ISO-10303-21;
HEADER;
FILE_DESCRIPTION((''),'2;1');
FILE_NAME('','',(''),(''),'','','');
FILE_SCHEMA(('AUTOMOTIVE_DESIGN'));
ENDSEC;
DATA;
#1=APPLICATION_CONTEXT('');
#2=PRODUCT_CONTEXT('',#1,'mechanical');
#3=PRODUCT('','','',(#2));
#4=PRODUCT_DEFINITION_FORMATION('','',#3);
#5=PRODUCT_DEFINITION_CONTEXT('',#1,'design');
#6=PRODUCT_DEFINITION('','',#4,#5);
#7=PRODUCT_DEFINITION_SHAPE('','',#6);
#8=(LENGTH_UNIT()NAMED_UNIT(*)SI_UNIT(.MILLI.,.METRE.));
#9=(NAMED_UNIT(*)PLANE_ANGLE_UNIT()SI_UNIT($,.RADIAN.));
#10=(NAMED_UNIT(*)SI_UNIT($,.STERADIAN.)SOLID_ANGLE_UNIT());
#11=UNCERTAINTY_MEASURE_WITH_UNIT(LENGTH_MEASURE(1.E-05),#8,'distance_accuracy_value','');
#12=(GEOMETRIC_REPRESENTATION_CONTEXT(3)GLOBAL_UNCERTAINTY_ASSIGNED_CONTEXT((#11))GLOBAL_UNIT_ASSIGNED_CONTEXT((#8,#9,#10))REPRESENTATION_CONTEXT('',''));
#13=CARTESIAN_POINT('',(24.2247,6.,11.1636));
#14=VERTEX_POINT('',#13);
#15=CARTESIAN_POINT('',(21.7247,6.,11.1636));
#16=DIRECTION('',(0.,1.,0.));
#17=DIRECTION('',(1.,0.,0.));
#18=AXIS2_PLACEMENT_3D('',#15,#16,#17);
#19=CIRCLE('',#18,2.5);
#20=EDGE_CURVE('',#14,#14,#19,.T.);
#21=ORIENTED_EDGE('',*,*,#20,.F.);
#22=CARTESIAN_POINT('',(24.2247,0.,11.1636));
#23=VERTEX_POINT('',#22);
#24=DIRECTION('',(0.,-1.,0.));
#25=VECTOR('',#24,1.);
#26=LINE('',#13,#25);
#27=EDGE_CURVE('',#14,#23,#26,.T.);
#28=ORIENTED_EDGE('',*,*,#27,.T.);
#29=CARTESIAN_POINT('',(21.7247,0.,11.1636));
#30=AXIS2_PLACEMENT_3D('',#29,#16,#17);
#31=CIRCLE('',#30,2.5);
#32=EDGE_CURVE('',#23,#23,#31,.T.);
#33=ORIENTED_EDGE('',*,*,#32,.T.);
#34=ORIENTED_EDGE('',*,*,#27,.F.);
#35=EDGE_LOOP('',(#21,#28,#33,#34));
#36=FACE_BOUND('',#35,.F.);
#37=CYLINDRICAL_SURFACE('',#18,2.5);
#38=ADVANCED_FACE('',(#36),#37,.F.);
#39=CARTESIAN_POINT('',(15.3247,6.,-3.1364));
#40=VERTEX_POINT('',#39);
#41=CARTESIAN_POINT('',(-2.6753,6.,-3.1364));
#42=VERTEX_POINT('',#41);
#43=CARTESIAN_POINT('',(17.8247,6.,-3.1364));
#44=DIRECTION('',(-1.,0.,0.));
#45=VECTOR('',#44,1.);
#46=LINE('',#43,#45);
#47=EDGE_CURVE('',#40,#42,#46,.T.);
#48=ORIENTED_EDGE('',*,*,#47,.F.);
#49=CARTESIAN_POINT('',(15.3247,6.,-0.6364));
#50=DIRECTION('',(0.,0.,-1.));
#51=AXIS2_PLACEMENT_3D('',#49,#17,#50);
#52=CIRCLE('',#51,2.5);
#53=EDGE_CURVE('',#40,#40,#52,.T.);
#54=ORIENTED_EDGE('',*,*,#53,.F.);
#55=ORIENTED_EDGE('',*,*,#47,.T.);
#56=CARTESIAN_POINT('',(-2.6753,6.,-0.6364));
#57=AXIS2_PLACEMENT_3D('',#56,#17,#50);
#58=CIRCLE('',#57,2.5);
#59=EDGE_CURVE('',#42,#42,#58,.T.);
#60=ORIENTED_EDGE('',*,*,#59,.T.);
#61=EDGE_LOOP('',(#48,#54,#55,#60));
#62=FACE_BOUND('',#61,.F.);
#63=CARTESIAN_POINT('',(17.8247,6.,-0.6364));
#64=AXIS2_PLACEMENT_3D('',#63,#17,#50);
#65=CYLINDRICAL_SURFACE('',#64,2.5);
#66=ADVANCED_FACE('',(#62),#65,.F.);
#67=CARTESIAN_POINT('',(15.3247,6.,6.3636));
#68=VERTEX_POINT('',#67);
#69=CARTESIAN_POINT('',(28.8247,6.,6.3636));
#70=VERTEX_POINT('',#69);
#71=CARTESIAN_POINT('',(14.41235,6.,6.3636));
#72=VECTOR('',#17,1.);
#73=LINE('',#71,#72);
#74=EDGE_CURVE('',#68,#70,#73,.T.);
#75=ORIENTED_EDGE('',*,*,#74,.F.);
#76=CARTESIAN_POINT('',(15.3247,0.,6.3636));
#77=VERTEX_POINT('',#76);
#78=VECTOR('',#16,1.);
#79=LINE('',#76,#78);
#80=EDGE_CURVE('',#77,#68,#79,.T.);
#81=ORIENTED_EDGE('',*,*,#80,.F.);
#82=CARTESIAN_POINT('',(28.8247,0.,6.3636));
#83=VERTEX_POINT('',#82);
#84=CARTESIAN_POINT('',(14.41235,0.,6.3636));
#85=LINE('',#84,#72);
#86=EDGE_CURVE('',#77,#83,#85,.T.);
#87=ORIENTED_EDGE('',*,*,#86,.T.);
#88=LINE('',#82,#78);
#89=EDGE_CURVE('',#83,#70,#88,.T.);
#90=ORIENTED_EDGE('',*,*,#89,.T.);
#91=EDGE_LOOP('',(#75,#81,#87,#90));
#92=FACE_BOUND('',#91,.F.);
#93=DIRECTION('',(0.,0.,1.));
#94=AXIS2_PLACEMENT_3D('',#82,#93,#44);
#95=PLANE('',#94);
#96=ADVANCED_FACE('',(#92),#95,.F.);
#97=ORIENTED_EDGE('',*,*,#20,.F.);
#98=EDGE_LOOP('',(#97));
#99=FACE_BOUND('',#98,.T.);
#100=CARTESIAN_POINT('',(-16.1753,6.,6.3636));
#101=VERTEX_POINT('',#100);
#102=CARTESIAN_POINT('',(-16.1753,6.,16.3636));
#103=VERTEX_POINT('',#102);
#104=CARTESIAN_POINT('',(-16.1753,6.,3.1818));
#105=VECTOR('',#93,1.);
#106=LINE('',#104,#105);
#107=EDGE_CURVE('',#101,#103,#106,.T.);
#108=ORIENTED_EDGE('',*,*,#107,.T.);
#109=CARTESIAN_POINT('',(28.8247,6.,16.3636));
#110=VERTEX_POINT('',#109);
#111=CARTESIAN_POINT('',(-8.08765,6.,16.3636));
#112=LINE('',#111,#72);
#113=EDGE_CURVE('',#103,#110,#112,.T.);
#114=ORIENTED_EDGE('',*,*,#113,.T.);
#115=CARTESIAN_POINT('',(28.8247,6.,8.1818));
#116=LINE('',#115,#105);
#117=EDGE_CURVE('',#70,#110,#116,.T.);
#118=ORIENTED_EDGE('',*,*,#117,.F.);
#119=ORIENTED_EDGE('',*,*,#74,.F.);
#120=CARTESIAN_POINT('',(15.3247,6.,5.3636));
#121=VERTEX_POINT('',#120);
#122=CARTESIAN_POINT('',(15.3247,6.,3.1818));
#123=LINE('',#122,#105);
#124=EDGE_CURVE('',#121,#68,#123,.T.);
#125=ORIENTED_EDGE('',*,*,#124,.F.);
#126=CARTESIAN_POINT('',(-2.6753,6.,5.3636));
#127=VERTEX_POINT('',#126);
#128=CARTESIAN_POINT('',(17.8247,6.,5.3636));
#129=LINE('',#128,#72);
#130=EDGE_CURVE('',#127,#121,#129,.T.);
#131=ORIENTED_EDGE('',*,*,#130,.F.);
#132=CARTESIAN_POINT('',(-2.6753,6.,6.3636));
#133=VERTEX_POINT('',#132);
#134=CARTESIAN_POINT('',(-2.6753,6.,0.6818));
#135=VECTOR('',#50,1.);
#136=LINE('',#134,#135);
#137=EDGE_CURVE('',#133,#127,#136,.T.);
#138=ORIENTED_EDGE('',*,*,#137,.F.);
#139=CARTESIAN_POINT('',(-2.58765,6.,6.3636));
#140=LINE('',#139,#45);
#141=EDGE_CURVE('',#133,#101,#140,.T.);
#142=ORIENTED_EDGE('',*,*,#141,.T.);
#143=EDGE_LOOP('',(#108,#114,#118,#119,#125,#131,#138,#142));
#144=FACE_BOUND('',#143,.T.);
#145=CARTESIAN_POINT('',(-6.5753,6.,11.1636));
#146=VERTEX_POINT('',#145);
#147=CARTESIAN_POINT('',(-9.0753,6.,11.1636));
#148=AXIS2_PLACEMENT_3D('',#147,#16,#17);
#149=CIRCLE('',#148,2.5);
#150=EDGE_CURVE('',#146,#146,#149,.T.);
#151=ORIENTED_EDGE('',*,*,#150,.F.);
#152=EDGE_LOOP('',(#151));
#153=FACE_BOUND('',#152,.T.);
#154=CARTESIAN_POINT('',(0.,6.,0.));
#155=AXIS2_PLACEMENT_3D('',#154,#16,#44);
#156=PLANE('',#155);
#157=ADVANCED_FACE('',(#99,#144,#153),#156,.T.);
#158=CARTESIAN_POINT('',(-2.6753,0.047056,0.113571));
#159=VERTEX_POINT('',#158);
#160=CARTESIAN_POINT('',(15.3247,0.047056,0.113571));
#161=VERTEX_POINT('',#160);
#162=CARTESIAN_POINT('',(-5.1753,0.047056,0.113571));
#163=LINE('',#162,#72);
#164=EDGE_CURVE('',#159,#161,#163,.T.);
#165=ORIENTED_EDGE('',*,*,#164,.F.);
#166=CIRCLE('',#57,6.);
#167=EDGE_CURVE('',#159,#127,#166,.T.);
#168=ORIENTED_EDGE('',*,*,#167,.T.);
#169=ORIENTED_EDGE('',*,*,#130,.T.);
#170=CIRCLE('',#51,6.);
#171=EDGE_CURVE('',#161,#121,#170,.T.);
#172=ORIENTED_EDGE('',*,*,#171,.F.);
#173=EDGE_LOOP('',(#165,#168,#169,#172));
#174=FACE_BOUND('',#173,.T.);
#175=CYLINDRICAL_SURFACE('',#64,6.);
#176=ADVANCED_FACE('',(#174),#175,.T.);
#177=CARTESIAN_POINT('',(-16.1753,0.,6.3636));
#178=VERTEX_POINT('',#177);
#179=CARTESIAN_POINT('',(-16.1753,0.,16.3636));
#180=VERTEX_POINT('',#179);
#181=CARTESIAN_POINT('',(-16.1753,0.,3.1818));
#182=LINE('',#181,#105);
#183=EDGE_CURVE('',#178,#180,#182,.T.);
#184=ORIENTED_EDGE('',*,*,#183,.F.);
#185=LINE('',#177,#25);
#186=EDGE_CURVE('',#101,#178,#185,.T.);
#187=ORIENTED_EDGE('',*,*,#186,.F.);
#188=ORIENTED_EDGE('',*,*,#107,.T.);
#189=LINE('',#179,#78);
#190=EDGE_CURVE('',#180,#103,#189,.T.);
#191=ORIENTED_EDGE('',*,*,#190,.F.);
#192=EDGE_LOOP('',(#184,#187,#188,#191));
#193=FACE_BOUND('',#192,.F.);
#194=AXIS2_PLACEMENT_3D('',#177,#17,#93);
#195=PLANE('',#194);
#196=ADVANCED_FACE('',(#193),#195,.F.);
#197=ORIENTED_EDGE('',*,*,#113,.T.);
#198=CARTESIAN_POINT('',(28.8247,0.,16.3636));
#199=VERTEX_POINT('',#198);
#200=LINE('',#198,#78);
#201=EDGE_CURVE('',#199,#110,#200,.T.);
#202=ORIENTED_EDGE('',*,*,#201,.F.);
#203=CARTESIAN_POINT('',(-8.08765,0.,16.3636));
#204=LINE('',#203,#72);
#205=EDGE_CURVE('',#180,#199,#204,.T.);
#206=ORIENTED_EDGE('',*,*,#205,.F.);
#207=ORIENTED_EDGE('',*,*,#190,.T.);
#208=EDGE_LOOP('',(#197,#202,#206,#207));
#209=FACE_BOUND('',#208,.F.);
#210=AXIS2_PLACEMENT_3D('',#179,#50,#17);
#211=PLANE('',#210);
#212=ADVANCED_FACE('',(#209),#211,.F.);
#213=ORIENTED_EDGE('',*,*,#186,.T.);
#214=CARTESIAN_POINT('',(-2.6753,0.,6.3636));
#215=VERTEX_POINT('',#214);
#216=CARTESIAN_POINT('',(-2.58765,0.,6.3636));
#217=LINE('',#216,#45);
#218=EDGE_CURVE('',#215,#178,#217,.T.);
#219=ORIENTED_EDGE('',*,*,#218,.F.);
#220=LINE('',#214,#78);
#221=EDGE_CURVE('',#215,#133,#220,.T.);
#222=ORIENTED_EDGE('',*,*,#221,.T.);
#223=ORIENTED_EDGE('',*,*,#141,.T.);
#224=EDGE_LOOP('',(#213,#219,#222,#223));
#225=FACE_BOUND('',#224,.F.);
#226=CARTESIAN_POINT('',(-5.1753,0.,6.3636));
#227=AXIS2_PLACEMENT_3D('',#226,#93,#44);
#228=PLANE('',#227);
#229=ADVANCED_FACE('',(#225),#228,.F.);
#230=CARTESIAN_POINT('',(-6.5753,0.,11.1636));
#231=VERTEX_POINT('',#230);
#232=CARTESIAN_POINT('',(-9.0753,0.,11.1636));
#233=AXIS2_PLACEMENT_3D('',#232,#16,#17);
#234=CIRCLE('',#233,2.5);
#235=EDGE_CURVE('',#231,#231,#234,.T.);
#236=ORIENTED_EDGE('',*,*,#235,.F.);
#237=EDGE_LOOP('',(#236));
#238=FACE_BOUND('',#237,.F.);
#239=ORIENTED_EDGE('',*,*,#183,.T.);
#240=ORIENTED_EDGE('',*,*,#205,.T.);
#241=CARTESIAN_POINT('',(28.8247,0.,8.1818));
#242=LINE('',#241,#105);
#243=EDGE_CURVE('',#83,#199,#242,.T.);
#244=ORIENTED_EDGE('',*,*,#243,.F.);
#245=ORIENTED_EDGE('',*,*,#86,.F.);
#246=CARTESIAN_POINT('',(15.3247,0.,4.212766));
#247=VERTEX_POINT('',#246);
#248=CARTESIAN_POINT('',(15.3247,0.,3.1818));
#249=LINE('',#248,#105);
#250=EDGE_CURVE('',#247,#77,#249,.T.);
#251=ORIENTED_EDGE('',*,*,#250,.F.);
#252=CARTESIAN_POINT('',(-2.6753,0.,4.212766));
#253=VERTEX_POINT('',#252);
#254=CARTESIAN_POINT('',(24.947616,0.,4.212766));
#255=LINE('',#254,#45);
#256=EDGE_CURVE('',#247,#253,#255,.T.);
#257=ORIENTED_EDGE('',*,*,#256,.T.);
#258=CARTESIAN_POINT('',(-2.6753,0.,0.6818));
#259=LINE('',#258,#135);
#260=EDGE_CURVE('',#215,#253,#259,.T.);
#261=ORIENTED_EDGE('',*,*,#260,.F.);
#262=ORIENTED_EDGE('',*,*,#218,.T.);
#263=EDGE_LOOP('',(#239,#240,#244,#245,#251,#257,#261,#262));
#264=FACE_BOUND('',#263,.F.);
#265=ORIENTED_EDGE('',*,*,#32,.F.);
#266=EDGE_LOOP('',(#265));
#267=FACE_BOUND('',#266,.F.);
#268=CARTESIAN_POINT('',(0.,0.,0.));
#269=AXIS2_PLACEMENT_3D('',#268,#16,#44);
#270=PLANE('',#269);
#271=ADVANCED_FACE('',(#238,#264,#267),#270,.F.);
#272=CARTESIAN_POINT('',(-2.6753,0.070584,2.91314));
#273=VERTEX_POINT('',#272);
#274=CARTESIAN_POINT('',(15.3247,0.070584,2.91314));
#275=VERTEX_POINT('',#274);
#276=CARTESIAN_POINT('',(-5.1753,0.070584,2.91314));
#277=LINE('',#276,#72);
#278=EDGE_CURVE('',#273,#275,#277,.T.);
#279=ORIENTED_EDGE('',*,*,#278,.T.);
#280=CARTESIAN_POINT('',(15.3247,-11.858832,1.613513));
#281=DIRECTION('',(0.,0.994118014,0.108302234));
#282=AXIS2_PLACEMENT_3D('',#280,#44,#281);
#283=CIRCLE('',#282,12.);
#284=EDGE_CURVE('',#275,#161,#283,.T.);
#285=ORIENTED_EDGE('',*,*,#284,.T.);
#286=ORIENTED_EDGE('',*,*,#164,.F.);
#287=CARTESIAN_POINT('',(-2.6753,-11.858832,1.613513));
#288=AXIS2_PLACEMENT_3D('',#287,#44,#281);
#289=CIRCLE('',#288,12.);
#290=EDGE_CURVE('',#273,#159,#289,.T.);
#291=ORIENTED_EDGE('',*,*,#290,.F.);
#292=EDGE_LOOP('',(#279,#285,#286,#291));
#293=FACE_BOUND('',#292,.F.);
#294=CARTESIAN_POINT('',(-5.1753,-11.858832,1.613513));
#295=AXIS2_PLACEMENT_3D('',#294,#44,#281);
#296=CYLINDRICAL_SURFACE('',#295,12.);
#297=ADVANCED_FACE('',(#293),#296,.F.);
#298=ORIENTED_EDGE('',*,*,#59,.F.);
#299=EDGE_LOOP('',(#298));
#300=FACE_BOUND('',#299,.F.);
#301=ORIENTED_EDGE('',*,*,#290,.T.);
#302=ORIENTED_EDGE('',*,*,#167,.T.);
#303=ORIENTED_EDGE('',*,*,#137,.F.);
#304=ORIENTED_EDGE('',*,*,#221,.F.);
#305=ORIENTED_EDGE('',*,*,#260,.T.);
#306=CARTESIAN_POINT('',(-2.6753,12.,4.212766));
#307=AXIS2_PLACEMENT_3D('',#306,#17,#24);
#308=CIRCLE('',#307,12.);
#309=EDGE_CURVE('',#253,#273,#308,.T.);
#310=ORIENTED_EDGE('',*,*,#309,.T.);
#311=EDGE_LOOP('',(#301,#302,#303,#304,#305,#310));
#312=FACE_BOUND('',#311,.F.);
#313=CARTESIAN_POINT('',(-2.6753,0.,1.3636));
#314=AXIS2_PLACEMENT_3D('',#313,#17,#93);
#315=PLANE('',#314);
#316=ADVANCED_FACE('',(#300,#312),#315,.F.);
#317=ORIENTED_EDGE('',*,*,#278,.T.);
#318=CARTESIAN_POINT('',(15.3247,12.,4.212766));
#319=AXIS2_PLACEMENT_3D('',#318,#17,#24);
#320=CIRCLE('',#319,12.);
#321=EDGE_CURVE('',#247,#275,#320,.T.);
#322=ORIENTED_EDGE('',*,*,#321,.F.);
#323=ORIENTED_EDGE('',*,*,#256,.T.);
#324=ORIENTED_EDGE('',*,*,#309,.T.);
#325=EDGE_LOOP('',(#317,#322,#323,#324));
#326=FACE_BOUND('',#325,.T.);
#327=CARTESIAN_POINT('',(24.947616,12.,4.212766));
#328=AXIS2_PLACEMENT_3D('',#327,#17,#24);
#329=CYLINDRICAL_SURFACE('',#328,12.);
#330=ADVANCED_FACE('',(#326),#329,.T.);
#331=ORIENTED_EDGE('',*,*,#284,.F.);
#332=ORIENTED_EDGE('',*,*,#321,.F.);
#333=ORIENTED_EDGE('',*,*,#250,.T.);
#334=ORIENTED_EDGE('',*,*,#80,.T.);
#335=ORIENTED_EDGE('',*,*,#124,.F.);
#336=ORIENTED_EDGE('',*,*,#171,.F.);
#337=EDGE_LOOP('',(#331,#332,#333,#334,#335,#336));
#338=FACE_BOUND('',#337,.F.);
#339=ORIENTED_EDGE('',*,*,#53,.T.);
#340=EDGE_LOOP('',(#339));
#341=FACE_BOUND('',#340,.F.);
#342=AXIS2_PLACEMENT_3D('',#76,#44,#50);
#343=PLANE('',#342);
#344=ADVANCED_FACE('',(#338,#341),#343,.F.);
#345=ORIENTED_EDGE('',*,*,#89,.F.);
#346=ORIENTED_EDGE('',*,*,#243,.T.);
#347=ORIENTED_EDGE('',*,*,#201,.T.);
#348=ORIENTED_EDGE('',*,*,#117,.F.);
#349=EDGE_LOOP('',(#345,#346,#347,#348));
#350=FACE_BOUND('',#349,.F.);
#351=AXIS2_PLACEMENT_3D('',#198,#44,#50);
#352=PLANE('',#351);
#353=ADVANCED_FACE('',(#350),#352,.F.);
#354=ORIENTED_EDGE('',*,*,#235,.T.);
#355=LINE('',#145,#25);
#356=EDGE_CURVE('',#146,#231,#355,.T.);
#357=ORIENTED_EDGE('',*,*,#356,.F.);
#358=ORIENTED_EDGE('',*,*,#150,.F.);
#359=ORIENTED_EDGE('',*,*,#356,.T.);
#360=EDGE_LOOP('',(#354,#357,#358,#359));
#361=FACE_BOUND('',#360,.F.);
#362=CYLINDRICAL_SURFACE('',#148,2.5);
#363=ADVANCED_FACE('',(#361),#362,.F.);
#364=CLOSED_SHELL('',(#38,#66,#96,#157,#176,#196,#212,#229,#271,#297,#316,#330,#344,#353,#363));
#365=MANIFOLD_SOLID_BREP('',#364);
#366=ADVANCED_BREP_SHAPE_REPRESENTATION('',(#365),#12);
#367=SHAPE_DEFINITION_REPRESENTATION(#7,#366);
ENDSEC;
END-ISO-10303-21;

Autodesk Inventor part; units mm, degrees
ref_plane "YZ Plane" through (0, 0, 0) normal (1, 0, 0) x (0, 1, 0)
ref_plane "XZ Plane" through (0, 0, 0) normal (0, 1, 0) x (-1, 0, 0)
sketch "Sketch1" plane through (0, 0, 0) normal (0, 1, 0) x (-1, 0, 0)
  line L0 (16.1753, 16.3636) -> (-28.8247, 16.3636)
  line L1 (-28.8247, 16.3636) -> (-28.8247, 6.3636)
  line L2 (16.1753, 6.3636) -> (16.1753, 16.3636)
  line L3 (-17.8247, 6.3636) -> (-17.8247, 1.3636)
  line L4 (-17.8247, 1.3636) -> (5.1753, 1.3636)
  line L5 (5.1753, 1.3636) -> (5.1753, 6.3636)
  line L6 (-28.8247, 6.3636) -> (-17.8247, 6.3636)
  line L7 (5.1753, 6.3636) -> (16.1753, 6.3636)
  point P0 (0, 0)
  dimension "d4" = 45
  dimension "d5" = 5
  dimension "d6" = 5
  dimension "d7" = 11
  dimension "d8" = 11
  dimension "d9" = 23
  dimension "d10" = 10
extrude "Extrusion1" add sketch "Sketch1" along normal blind 6
sketch "Sketch4" plane through (17.8247, 0, 6.3636) normal (1, 0, 0) x (0, 0, -1)
  circle A0 centre (7, 6) radius 6
  line L0 (0, 6) -> (5, 6) projected
  line L1 (0, 0) -> (0, 6) projected
  point P0 (6.3636, 0)
  dimension "d20" = 12
  dimension "d21" = 0
  dimension "d36" = 7
extrude "Extrusion4" add sketch "Sketch4" against normal up to surface (23 mm away)
fillet "Fillet1" radius 12 2 edges at (6.3247, 0.3431, 1.3636) (6.3247, 0, 1.3636)
sketch "Sketch5" plane through (17.8247, 0, 6.3636) normal (1, 0, 0) x (0, 0, -1)
  circle A0 centre (7, 6) radius 6 projected
  circle A1 centre (7, 6) radius 2.5
  point P0 (6.3636, 0)
  point P1 (1, 6)
  point P2 (6.25, 0.0471)
  dimension "d27" = 5
extrude "Extrusion5" cut sketch "Sketch5" against normal through all contours A1
ref_plane "Work Plane1" through (17.8247, 6, -6.6364) normal (0, 0, 1) x (1, 0, 0)
sketch "Sketch6" plane through (0, 6, 0) normal (0, 1, 0) x (1, 0, 0)
  circle A0 centre (-9.0753, -11.1636) radius 2.5
  circle A1 centre (21.7247, -11.1636) radius 2.5
  line L0 (37.8247, 6.6364) -> (-25.1753, 6.6364) projected
  line L1 (28.8247, -16.3636) -> (28.8247, -6.3636) projected
  line L2 (-16.1753, -6.3636) -> (-16.1753, -16.3636) projected
  point P0 (0, 0)
  dimension "d33" = 5
  dimension "d34" = 5
  dimension "d35" = 17.8
  dimension "d37" = 17.8
  dimension "d38" = 7.1
  dimension "d39" = 30.8
  dimension "d40" = 7.1
extrude "Extrusion6" cut sketch "Sketch6" against normal through all
move faces "Move1" translate (-2.5, 0, 0) faces at (17.8247, 3.6127, 3.7179)
move faces "Move2" translate (2.5, 0, 0) faces at (-5.1753, 3.6127, 3.7179) (1.658, 5.7988, -3.1283)
properties part number "Cerniera 1"
